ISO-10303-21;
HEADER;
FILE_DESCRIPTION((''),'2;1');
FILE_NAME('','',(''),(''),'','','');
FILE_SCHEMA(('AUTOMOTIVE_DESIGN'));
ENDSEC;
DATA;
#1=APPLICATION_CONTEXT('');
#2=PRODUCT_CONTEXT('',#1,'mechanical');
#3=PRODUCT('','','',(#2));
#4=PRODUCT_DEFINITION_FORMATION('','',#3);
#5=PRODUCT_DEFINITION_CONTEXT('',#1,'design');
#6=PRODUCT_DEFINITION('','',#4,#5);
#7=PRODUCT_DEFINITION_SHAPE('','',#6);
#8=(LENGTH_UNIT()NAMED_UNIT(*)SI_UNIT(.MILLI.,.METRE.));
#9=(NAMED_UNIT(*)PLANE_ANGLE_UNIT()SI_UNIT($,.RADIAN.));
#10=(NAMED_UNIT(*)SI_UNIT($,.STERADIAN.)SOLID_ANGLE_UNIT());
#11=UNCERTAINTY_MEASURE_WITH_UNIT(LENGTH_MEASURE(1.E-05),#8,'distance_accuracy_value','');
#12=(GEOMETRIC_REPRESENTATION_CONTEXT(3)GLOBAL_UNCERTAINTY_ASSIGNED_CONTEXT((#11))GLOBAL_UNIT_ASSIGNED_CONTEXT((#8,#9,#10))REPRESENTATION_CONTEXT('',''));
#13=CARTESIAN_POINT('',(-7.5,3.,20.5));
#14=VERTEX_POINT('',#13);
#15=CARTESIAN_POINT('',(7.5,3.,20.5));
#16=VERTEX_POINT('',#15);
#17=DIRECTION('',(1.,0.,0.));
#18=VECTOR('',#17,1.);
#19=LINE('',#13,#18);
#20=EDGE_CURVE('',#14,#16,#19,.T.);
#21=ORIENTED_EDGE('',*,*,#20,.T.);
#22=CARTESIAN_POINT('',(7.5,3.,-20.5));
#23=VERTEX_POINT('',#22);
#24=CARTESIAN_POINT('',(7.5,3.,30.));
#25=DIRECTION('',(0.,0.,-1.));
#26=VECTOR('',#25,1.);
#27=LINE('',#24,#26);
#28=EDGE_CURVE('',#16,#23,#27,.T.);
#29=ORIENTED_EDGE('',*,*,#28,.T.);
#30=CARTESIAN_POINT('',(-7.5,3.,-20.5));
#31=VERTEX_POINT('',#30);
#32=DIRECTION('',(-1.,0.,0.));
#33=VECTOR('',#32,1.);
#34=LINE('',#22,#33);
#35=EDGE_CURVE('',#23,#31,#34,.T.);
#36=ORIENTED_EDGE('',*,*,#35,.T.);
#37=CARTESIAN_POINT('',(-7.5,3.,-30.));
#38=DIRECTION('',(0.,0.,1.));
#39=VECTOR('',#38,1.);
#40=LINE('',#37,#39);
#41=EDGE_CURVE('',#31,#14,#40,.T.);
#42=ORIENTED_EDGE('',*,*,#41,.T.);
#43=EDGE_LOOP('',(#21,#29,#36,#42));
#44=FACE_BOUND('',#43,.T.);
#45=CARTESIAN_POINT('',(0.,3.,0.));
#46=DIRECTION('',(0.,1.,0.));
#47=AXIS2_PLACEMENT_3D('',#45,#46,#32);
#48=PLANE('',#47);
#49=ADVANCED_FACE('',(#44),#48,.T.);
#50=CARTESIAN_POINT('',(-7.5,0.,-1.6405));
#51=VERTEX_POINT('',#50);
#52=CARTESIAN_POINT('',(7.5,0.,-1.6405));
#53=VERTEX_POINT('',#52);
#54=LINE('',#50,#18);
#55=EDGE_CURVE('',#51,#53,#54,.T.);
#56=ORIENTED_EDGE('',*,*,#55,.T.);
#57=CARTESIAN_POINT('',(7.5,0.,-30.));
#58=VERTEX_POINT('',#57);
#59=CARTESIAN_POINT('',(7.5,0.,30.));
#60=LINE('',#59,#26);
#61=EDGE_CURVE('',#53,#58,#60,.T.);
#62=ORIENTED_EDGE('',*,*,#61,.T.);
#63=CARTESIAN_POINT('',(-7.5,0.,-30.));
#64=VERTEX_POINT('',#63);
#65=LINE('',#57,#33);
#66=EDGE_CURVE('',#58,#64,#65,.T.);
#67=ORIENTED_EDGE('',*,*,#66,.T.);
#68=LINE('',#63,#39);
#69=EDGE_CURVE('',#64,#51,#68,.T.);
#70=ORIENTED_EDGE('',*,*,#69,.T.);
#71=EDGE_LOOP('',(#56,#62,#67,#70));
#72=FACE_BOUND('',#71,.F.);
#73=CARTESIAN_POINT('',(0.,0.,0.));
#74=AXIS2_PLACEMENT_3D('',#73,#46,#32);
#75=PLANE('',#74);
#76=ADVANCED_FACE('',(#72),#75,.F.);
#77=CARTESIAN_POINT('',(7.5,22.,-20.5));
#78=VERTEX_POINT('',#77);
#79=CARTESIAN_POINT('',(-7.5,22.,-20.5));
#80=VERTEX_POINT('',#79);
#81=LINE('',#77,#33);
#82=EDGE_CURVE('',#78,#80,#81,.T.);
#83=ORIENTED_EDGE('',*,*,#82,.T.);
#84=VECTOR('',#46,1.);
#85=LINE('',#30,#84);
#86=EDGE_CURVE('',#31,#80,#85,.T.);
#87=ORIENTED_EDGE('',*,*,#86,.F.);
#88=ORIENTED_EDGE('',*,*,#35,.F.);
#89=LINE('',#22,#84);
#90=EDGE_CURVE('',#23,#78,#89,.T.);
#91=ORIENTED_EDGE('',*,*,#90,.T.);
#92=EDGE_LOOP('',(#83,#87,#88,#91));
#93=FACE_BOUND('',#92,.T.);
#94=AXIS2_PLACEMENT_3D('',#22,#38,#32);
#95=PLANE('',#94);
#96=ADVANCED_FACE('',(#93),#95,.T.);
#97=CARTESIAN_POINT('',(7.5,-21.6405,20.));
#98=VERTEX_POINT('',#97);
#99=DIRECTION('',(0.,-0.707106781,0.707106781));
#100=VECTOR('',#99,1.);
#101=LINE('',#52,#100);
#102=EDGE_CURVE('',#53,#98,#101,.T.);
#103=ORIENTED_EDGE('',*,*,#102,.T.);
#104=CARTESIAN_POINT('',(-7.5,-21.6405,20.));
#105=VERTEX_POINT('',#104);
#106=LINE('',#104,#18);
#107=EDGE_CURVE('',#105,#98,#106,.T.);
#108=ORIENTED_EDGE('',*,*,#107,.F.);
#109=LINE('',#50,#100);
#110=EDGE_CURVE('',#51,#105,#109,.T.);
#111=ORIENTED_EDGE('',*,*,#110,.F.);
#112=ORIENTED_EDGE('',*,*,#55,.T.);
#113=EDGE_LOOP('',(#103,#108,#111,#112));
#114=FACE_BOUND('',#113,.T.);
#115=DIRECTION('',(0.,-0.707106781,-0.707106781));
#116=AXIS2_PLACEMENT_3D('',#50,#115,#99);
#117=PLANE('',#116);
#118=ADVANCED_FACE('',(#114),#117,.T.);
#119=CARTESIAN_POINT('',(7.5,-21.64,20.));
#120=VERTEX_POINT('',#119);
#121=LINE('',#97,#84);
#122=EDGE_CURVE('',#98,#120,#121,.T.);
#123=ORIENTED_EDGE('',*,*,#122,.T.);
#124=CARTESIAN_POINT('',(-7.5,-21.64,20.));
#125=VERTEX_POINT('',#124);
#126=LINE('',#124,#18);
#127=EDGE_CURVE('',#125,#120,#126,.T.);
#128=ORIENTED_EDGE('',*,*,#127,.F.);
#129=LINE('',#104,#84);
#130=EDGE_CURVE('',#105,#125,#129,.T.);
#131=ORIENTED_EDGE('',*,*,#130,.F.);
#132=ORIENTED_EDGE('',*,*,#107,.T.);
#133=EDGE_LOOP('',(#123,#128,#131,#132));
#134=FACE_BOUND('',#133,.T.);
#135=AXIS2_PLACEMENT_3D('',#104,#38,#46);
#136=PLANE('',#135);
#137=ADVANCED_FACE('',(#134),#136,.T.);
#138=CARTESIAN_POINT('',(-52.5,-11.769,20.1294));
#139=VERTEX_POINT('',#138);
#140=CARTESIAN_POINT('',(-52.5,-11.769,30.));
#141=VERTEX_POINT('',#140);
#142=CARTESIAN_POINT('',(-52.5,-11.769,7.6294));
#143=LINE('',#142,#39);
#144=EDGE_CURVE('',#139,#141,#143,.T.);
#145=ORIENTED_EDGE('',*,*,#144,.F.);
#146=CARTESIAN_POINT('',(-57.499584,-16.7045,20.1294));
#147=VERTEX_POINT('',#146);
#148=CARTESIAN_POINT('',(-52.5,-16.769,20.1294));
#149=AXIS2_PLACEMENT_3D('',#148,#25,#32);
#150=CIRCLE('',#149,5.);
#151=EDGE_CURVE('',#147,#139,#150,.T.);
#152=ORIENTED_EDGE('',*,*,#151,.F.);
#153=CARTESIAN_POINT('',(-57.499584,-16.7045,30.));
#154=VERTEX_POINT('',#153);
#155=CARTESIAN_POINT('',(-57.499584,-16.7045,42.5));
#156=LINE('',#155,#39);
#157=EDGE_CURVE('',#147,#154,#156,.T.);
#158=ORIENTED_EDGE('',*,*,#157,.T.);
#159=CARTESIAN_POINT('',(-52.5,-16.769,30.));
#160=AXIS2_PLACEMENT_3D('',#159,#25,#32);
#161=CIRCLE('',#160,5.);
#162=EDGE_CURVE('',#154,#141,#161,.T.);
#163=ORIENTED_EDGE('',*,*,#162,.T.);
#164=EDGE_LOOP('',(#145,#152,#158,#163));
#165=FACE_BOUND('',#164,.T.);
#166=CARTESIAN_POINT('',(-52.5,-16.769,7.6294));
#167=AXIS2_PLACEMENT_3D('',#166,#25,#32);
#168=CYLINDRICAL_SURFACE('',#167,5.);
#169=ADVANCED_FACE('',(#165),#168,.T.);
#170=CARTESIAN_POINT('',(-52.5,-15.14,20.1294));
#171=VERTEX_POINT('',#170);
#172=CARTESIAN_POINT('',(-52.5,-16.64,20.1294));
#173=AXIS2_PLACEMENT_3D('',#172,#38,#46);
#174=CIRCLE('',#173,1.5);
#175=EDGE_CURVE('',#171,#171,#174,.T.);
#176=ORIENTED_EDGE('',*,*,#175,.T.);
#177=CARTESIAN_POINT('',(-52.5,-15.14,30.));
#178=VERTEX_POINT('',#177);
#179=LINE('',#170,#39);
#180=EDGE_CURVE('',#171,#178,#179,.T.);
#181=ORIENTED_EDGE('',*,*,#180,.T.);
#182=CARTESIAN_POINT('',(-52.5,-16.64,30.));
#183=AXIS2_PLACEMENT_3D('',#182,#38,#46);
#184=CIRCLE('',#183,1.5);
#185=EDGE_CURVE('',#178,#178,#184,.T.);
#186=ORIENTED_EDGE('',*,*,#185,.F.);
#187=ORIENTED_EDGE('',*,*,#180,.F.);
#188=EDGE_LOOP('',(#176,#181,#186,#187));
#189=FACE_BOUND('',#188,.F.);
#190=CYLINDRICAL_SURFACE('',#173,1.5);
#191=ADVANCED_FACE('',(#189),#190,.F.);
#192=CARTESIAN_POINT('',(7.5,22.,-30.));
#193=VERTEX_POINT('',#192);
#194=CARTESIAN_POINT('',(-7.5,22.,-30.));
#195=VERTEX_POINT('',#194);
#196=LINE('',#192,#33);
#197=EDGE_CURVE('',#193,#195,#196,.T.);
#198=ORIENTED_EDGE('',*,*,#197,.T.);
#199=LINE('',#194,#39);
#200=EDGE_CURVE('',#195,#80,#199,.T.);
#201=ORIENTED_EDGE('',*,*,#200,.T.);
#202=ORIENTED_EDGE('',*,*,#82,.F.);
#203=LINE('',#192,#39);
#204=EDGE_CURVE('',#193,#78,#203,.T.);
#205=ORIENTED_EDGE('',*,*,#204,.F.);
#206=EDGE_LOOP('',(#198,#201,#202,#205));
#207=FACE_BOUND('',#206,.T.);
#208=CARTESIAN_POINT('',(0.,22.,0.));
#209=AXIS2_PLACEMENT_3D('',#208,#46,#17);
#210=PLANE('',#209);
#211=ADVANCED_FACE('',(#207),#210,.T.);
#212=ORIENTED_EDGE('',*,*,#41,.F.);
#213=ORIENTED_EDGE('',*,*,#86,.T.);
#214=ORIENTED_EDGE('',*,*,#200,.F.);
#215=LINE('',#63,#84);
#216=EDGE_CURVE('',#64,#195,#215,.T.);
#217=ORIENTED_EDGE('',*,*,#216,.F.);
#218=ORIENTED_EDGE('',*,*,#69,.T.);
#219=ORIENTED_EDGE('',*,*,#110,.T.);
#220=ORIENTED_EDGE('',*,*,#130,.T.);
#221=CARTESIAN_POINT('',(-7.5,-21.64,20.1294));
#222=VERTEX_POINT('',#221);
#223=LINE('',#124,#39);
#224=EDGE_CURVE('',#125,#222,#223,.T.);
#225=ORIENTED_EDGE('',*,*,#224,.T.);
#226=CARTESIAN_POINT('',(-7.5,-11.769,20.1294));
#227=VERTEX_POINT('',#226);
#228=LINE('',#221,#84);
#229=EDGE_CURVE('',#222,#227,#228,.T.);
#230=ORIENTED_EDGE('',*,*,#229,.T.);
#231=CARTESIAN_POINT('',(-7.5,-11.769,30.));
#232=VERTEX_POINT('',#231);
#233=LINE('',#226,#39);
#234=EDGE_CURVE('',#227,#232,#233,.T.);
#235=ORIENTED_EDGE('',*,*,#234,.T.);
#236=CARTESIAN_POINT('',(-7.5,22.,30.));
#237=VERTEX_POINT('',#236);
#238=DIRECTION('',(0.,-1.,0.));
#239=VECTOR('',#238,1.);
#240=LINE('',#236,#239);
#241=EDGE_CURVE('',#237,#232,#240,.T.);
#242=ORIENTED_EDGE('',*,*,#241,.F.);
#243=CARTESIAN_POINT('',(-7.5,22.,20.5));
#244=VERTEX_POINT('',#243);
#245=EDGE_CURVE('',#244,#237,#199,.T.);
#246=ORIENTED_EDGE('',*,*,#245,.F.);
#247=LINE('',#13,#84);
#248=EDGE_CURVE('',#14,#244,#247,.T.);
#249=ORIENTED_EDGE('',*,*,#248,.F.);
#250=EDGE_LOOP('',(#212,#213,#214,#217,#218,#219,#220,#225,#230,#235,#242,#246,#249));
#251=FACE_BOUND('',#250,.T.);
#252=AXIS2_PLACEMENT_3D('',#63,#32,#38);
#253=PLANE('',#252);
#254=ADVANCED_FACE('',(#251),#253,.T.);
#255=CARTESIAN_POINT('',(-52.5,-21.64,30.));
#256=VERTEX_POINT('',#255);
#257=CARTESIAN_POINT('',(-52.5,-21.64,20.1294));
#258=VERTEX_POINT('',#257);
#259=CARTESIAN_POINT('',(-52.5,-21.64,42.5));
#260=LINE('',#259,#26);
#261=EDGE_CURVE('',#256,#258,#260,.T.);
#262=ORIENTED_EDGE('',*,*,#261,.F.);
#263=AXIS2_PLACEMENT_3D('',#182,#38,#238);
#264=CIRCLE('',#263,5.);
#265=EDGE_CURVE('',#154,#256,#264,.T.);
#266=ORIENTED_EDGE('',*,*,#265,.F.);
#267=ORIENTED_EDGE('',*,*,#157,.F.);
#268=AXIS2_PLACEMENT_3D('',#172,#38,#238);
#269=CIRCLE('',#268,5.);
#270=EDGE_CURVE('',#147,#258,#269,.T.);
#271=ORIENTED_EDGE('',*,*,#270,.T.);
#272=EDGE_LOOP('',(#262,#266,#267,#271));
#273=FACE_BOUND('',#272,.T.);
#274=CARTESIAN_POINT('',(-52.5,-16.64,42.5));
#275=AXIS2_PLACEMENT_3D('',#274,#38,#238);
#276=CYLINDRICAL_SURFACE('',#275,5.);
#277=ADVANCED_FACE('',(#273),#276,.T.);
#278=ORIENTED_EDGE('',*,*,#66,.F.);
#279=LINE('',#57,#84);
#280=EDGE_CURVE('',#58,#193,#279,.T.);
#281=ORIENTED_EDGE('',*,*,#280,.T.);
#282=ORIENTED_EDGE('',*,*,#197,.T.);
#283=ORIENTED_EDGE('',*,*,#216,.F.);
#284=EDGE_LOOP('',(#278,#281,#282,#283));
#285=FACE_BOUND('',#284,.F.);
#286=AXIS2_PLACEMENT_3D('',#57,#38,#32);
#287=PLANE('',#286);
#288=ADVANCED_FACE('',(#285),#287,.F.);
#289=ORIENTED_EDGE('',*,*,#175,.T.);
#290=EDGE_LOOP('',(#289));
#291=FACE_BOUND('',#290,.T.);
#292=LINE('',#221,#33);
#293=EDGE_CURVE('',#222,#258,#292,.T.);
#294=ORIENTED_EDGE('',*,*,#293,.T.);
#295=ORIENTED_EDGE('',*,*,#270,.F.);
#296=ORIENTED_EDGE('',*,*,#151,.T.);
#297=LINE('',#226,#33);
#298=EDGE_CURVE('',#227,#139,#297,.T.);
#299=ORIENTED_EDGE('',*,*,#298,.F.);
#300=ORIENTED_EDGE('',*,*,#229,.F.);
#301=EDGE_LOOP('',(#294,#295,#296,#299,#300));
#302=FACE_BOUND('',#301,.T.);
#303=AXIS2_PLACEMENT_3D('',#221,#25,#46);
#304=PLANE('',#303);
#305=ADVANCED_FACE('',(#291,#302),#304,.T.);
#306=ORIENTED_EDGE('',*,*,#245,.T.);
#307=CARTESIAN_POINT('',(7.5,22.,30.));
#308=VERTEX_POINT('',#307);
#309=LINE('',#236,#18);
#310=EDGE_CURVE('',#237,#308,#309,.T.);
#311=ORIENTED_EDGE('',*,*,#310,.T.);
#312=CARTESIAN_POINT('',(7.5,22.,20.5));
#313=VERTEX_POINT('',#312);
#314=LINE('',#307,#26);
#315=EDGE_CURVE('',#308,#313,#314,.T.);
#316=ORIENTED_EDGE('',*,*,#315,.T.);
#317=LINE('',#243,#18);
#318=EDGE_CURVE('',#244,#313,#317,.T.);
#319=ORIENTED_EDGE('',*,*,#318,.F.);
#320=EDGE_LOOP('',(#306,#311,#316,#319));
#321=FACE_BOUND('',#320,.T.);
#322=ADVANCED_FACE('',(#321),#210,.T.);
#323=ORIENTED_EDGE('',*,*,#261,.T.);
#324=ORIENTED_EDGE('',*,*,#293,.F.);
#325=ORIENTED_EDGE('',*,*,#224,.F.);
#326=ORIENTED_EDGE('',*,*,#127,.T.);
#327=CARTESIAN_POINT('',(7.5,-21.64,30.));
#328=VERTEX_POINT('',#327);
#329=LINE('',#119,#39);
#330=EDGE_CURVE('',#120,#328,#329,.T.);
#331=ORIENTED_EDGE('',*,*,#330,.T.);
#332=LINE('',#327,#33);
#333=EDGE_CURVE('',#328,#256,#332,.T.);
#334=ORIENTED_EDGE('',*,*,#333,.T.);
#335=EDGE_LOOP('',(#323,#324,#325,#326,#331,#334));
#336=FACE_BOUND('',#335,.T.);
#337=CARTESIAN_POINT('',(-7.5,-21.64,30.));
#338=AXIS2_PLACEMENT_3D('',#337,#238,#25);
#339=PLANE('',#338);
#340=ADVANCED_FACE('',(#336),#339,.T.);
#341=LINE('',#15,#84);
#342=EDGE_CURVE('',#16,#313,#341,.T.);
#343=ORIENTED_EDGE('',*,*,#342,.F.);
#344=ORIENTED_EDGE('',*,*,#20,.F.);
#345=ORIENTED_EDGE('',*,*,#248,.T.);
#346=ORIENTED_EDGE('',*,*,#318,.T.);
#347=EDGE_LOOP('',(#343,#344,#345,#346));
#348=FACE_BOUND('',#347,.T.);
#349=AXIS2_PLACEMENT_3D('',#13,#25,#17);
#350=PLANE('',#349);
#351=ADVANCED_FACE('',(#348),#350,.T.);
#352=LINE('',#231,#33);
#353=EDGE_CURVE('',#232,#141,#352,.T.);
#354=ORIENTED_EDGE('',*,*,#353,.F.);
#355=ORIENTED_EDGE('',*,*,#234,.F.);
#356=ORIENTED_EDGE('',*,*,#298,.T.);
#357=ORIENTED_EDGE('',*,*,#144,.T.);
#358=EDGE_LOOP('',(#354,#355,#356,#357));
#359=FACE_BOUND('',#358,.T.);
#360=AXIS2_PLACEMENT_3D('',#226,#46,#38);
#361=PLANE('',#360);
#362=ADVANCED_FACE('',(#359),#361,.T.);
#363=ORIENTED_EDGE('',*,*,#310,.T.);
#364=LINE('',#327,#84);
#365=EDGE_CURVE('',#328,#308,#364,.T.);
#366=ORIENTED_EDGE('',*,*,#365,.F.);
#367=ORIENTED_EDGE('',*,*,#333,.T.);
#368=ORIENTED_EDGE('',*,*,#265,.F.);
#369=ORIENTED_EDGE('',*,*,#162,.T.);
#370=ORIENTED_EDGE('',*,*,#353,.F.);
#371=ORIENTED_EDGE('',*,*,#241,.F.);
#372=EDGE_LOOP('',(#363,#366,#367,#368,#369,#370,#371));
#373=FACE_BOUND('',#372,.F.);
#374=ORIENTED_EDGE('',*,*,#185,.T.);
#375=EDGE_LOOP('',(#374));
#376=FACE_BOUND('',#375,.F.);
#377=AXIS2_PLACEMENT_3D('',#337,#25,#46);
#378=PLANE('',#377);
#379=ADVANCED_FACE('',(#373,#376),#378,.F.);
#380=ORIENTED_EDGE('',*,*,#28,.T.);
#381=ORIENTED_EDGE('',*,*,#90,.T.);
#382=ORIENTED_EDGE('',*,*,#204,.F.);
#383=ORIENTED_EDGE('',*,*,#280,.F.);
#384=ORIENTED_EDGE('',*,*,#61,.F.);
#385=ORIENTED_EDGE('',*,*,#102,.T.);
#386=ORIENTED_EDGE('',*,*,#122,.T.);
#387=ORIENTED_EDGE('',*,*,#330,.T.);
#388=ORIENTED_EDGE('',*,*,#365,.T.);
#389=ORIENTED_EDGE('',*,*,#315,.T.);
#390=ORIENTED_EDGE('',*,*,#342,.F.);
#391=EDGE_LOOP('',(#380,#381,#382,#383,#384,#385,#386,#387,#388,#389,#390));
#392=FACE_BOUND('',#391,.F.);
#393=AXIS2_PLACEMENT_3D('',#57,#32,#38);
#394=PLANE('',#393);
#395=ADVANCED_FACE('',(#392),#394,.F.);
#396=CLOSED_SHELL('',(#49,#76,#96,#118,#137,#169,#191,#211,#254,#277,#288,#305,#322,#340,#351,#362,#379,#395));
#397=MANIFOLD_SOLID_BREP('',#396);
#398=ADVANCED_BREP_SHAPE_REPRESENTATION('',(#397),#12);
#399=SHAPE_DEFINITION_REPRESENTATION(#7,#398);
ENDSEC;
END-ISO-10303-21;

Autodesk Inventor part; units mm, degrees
ref_plane "YZ Plane" through (0, 0, 0) normal (1, 0, 0) x (0, 1, 0)
ref_plane "XZ Plane" through (0, 0, 0) normal (0, 1, 0) x (-1, 0, 0)
ref_plane "XY Plane" through (0, 0, 0) normal (0, 0, 1) x (1, 0, 0)
sketch "Sketch1" plane through (0, 0, 0) normal (0, 1, 0) x (-1, 0, 0)
  line L0 (-7.5, -30) -> (7.5, -30)
  line L1 (7.5, -30) -> (7.5, 30)
  line L2 (7.5, 30) -> (-7.5, 30)
  line L3 (-7.5, 30) -> (-7.5, -30)
  line L4 (-7.5, -30) -> (7.5, 30) construction
  line L5 (7.5, -30) -> (-7.5, 30) construction
  point P0 (0, 0)
  dimension "d0" = 15
  dimension "d1" = 60
extrude "Extrusion1" add sketch "Sketch1" along normal blind 3
sketch "Sketch2" plane through (0, 3, 0) normal (0, 1, 0) x (1, 0, 0)
  line L0 (-7.5, 30) -> (-7.5, -30) projected
  line L1 (7.5, 20.5) -> (-7.5, 20.5)
  line L2 (-7.5, 20.5) -> (-7.5, -20.5)
  line L3 (-7.5, -20.5) -> (7.5, -20.5)
  line L4 (7.5, -20.5) -> (7.5, 20.5)
  line L5 (7.5, 20.5) -> (-7.5, -20.5) construction
  line L6 (-7.5, 20.5) -> (7.5, -20.5) construction
  line L7 (7.5, -20.5) -> (-7.5, -20.5)
  line L8 (-7.5, -20.5) -> (-7.5, -30)
  line L9 (-7.5, -30) -> (7.5, -30)
  line L10 (7.5, -30) -> (7.5, -20.5)
  line L11 (7.5, 30) -> (-7.5, 30) projected
  line L12 (7.5, 20.5) -> (-7.5, 20.5)
  line L13 (-7.5, 20.5) -> (-7.5, 30)
  line L14 (-7.5, 30) -> (7.5, 30)
  line L15 (7.5, 30) -> (7.5, 20.5)
  point P0 (0, 0)
  dimension "d4" = 41
extrude "Extrusion2" add sketch "Sketch2" along normal blind 19 contours L11 L15 L1 L0 | L3 L10 L9 L0
sketch "Sketch3" plane through (-7.5, 0, -30) normal (-1, 0, 0) x (0, 0, 1)
  line L0 (60, 0) -> (0, 0) projected
  line L1 (60, 0) -> (50, 0)
  line L2 (50, 0) -> (50, -21.64)
  line L3 (50, -21.64) -> (60, -21.64)
  line L4 (60, -21.64) -> (60, 0)
  point P0 (30, 0)
  dimension "d7" = 10
  dimension "d8" = 21.64
extrude "Extrusion3" add sketch "Sketch3" against normal blind 15
sketch "Sketch5" plane through (-7.5, 0, -30) normal (-1, 0, 0) x (0, 0, 1)
  line L0 (0, 0) -> (50, 0) projected
  line L1 (28.3595, 0) -> (50, -21.6405)
  line L2 (50, -21.64) -> (50, 0) projected
  line L3 (28.3595, 0) -> (58.9638, 0) construction
  line L4 (50, -21.6405) -> (50, 0)
  line L5 (50, 0) -> (28.3595, 0)
  point P0 (30, 0)
  dimension "d15" = 45
extrude "Extrusion5" add sketch "Sketch5" against normal blind 15
sketch "Sketch6" plane through (-7.5, 0, -30) normal (-1, 0, 0) x (0, 0, 1)
  line L0 (60, -21.64) -> (60, 22) projected
  line L1 (60, -21.64) -> (50.1294, -21.64)
  line L2 (50.1294, -21.64) -> (50.1294, -11.769)
  line L3 (50.1294, -11.769) -> (60, -11.769)
  line L4 (60, -11.769) -> (60, -21.64)
  point P0 (30, 0)
  dimension "d18" = 9.871
extrude "Extrusion6" add sketch "Sketch6" along normal blind 50
sketch "Sketch7" plane through (-7.5, 22, 30) normal (0, 0, 1) x (1, 0, 0)
  point P0 (7.5, -22)
fillet "Fillet1" radius 5 2 edges at (-57.5, -21.64, 25.0647) (-57.5, -11.769, 25.0647)
sketch "Sketch8" plane through (-7.5, -21.64, 20.1294) normal (0, 0, -1) x (-1, 0, 0)
  arc A0 (45, 0) -> (50, 5) centre (45, 5) ccw projected
  point P0 (-7.5, 21.64)
hole "Hole1" at (-52.5, -16.64, 20.1294) direction (0, 0, 1) diameter 3 end through all
properties part number "TurretServoSupport" material "PC/ABS Plastic"
